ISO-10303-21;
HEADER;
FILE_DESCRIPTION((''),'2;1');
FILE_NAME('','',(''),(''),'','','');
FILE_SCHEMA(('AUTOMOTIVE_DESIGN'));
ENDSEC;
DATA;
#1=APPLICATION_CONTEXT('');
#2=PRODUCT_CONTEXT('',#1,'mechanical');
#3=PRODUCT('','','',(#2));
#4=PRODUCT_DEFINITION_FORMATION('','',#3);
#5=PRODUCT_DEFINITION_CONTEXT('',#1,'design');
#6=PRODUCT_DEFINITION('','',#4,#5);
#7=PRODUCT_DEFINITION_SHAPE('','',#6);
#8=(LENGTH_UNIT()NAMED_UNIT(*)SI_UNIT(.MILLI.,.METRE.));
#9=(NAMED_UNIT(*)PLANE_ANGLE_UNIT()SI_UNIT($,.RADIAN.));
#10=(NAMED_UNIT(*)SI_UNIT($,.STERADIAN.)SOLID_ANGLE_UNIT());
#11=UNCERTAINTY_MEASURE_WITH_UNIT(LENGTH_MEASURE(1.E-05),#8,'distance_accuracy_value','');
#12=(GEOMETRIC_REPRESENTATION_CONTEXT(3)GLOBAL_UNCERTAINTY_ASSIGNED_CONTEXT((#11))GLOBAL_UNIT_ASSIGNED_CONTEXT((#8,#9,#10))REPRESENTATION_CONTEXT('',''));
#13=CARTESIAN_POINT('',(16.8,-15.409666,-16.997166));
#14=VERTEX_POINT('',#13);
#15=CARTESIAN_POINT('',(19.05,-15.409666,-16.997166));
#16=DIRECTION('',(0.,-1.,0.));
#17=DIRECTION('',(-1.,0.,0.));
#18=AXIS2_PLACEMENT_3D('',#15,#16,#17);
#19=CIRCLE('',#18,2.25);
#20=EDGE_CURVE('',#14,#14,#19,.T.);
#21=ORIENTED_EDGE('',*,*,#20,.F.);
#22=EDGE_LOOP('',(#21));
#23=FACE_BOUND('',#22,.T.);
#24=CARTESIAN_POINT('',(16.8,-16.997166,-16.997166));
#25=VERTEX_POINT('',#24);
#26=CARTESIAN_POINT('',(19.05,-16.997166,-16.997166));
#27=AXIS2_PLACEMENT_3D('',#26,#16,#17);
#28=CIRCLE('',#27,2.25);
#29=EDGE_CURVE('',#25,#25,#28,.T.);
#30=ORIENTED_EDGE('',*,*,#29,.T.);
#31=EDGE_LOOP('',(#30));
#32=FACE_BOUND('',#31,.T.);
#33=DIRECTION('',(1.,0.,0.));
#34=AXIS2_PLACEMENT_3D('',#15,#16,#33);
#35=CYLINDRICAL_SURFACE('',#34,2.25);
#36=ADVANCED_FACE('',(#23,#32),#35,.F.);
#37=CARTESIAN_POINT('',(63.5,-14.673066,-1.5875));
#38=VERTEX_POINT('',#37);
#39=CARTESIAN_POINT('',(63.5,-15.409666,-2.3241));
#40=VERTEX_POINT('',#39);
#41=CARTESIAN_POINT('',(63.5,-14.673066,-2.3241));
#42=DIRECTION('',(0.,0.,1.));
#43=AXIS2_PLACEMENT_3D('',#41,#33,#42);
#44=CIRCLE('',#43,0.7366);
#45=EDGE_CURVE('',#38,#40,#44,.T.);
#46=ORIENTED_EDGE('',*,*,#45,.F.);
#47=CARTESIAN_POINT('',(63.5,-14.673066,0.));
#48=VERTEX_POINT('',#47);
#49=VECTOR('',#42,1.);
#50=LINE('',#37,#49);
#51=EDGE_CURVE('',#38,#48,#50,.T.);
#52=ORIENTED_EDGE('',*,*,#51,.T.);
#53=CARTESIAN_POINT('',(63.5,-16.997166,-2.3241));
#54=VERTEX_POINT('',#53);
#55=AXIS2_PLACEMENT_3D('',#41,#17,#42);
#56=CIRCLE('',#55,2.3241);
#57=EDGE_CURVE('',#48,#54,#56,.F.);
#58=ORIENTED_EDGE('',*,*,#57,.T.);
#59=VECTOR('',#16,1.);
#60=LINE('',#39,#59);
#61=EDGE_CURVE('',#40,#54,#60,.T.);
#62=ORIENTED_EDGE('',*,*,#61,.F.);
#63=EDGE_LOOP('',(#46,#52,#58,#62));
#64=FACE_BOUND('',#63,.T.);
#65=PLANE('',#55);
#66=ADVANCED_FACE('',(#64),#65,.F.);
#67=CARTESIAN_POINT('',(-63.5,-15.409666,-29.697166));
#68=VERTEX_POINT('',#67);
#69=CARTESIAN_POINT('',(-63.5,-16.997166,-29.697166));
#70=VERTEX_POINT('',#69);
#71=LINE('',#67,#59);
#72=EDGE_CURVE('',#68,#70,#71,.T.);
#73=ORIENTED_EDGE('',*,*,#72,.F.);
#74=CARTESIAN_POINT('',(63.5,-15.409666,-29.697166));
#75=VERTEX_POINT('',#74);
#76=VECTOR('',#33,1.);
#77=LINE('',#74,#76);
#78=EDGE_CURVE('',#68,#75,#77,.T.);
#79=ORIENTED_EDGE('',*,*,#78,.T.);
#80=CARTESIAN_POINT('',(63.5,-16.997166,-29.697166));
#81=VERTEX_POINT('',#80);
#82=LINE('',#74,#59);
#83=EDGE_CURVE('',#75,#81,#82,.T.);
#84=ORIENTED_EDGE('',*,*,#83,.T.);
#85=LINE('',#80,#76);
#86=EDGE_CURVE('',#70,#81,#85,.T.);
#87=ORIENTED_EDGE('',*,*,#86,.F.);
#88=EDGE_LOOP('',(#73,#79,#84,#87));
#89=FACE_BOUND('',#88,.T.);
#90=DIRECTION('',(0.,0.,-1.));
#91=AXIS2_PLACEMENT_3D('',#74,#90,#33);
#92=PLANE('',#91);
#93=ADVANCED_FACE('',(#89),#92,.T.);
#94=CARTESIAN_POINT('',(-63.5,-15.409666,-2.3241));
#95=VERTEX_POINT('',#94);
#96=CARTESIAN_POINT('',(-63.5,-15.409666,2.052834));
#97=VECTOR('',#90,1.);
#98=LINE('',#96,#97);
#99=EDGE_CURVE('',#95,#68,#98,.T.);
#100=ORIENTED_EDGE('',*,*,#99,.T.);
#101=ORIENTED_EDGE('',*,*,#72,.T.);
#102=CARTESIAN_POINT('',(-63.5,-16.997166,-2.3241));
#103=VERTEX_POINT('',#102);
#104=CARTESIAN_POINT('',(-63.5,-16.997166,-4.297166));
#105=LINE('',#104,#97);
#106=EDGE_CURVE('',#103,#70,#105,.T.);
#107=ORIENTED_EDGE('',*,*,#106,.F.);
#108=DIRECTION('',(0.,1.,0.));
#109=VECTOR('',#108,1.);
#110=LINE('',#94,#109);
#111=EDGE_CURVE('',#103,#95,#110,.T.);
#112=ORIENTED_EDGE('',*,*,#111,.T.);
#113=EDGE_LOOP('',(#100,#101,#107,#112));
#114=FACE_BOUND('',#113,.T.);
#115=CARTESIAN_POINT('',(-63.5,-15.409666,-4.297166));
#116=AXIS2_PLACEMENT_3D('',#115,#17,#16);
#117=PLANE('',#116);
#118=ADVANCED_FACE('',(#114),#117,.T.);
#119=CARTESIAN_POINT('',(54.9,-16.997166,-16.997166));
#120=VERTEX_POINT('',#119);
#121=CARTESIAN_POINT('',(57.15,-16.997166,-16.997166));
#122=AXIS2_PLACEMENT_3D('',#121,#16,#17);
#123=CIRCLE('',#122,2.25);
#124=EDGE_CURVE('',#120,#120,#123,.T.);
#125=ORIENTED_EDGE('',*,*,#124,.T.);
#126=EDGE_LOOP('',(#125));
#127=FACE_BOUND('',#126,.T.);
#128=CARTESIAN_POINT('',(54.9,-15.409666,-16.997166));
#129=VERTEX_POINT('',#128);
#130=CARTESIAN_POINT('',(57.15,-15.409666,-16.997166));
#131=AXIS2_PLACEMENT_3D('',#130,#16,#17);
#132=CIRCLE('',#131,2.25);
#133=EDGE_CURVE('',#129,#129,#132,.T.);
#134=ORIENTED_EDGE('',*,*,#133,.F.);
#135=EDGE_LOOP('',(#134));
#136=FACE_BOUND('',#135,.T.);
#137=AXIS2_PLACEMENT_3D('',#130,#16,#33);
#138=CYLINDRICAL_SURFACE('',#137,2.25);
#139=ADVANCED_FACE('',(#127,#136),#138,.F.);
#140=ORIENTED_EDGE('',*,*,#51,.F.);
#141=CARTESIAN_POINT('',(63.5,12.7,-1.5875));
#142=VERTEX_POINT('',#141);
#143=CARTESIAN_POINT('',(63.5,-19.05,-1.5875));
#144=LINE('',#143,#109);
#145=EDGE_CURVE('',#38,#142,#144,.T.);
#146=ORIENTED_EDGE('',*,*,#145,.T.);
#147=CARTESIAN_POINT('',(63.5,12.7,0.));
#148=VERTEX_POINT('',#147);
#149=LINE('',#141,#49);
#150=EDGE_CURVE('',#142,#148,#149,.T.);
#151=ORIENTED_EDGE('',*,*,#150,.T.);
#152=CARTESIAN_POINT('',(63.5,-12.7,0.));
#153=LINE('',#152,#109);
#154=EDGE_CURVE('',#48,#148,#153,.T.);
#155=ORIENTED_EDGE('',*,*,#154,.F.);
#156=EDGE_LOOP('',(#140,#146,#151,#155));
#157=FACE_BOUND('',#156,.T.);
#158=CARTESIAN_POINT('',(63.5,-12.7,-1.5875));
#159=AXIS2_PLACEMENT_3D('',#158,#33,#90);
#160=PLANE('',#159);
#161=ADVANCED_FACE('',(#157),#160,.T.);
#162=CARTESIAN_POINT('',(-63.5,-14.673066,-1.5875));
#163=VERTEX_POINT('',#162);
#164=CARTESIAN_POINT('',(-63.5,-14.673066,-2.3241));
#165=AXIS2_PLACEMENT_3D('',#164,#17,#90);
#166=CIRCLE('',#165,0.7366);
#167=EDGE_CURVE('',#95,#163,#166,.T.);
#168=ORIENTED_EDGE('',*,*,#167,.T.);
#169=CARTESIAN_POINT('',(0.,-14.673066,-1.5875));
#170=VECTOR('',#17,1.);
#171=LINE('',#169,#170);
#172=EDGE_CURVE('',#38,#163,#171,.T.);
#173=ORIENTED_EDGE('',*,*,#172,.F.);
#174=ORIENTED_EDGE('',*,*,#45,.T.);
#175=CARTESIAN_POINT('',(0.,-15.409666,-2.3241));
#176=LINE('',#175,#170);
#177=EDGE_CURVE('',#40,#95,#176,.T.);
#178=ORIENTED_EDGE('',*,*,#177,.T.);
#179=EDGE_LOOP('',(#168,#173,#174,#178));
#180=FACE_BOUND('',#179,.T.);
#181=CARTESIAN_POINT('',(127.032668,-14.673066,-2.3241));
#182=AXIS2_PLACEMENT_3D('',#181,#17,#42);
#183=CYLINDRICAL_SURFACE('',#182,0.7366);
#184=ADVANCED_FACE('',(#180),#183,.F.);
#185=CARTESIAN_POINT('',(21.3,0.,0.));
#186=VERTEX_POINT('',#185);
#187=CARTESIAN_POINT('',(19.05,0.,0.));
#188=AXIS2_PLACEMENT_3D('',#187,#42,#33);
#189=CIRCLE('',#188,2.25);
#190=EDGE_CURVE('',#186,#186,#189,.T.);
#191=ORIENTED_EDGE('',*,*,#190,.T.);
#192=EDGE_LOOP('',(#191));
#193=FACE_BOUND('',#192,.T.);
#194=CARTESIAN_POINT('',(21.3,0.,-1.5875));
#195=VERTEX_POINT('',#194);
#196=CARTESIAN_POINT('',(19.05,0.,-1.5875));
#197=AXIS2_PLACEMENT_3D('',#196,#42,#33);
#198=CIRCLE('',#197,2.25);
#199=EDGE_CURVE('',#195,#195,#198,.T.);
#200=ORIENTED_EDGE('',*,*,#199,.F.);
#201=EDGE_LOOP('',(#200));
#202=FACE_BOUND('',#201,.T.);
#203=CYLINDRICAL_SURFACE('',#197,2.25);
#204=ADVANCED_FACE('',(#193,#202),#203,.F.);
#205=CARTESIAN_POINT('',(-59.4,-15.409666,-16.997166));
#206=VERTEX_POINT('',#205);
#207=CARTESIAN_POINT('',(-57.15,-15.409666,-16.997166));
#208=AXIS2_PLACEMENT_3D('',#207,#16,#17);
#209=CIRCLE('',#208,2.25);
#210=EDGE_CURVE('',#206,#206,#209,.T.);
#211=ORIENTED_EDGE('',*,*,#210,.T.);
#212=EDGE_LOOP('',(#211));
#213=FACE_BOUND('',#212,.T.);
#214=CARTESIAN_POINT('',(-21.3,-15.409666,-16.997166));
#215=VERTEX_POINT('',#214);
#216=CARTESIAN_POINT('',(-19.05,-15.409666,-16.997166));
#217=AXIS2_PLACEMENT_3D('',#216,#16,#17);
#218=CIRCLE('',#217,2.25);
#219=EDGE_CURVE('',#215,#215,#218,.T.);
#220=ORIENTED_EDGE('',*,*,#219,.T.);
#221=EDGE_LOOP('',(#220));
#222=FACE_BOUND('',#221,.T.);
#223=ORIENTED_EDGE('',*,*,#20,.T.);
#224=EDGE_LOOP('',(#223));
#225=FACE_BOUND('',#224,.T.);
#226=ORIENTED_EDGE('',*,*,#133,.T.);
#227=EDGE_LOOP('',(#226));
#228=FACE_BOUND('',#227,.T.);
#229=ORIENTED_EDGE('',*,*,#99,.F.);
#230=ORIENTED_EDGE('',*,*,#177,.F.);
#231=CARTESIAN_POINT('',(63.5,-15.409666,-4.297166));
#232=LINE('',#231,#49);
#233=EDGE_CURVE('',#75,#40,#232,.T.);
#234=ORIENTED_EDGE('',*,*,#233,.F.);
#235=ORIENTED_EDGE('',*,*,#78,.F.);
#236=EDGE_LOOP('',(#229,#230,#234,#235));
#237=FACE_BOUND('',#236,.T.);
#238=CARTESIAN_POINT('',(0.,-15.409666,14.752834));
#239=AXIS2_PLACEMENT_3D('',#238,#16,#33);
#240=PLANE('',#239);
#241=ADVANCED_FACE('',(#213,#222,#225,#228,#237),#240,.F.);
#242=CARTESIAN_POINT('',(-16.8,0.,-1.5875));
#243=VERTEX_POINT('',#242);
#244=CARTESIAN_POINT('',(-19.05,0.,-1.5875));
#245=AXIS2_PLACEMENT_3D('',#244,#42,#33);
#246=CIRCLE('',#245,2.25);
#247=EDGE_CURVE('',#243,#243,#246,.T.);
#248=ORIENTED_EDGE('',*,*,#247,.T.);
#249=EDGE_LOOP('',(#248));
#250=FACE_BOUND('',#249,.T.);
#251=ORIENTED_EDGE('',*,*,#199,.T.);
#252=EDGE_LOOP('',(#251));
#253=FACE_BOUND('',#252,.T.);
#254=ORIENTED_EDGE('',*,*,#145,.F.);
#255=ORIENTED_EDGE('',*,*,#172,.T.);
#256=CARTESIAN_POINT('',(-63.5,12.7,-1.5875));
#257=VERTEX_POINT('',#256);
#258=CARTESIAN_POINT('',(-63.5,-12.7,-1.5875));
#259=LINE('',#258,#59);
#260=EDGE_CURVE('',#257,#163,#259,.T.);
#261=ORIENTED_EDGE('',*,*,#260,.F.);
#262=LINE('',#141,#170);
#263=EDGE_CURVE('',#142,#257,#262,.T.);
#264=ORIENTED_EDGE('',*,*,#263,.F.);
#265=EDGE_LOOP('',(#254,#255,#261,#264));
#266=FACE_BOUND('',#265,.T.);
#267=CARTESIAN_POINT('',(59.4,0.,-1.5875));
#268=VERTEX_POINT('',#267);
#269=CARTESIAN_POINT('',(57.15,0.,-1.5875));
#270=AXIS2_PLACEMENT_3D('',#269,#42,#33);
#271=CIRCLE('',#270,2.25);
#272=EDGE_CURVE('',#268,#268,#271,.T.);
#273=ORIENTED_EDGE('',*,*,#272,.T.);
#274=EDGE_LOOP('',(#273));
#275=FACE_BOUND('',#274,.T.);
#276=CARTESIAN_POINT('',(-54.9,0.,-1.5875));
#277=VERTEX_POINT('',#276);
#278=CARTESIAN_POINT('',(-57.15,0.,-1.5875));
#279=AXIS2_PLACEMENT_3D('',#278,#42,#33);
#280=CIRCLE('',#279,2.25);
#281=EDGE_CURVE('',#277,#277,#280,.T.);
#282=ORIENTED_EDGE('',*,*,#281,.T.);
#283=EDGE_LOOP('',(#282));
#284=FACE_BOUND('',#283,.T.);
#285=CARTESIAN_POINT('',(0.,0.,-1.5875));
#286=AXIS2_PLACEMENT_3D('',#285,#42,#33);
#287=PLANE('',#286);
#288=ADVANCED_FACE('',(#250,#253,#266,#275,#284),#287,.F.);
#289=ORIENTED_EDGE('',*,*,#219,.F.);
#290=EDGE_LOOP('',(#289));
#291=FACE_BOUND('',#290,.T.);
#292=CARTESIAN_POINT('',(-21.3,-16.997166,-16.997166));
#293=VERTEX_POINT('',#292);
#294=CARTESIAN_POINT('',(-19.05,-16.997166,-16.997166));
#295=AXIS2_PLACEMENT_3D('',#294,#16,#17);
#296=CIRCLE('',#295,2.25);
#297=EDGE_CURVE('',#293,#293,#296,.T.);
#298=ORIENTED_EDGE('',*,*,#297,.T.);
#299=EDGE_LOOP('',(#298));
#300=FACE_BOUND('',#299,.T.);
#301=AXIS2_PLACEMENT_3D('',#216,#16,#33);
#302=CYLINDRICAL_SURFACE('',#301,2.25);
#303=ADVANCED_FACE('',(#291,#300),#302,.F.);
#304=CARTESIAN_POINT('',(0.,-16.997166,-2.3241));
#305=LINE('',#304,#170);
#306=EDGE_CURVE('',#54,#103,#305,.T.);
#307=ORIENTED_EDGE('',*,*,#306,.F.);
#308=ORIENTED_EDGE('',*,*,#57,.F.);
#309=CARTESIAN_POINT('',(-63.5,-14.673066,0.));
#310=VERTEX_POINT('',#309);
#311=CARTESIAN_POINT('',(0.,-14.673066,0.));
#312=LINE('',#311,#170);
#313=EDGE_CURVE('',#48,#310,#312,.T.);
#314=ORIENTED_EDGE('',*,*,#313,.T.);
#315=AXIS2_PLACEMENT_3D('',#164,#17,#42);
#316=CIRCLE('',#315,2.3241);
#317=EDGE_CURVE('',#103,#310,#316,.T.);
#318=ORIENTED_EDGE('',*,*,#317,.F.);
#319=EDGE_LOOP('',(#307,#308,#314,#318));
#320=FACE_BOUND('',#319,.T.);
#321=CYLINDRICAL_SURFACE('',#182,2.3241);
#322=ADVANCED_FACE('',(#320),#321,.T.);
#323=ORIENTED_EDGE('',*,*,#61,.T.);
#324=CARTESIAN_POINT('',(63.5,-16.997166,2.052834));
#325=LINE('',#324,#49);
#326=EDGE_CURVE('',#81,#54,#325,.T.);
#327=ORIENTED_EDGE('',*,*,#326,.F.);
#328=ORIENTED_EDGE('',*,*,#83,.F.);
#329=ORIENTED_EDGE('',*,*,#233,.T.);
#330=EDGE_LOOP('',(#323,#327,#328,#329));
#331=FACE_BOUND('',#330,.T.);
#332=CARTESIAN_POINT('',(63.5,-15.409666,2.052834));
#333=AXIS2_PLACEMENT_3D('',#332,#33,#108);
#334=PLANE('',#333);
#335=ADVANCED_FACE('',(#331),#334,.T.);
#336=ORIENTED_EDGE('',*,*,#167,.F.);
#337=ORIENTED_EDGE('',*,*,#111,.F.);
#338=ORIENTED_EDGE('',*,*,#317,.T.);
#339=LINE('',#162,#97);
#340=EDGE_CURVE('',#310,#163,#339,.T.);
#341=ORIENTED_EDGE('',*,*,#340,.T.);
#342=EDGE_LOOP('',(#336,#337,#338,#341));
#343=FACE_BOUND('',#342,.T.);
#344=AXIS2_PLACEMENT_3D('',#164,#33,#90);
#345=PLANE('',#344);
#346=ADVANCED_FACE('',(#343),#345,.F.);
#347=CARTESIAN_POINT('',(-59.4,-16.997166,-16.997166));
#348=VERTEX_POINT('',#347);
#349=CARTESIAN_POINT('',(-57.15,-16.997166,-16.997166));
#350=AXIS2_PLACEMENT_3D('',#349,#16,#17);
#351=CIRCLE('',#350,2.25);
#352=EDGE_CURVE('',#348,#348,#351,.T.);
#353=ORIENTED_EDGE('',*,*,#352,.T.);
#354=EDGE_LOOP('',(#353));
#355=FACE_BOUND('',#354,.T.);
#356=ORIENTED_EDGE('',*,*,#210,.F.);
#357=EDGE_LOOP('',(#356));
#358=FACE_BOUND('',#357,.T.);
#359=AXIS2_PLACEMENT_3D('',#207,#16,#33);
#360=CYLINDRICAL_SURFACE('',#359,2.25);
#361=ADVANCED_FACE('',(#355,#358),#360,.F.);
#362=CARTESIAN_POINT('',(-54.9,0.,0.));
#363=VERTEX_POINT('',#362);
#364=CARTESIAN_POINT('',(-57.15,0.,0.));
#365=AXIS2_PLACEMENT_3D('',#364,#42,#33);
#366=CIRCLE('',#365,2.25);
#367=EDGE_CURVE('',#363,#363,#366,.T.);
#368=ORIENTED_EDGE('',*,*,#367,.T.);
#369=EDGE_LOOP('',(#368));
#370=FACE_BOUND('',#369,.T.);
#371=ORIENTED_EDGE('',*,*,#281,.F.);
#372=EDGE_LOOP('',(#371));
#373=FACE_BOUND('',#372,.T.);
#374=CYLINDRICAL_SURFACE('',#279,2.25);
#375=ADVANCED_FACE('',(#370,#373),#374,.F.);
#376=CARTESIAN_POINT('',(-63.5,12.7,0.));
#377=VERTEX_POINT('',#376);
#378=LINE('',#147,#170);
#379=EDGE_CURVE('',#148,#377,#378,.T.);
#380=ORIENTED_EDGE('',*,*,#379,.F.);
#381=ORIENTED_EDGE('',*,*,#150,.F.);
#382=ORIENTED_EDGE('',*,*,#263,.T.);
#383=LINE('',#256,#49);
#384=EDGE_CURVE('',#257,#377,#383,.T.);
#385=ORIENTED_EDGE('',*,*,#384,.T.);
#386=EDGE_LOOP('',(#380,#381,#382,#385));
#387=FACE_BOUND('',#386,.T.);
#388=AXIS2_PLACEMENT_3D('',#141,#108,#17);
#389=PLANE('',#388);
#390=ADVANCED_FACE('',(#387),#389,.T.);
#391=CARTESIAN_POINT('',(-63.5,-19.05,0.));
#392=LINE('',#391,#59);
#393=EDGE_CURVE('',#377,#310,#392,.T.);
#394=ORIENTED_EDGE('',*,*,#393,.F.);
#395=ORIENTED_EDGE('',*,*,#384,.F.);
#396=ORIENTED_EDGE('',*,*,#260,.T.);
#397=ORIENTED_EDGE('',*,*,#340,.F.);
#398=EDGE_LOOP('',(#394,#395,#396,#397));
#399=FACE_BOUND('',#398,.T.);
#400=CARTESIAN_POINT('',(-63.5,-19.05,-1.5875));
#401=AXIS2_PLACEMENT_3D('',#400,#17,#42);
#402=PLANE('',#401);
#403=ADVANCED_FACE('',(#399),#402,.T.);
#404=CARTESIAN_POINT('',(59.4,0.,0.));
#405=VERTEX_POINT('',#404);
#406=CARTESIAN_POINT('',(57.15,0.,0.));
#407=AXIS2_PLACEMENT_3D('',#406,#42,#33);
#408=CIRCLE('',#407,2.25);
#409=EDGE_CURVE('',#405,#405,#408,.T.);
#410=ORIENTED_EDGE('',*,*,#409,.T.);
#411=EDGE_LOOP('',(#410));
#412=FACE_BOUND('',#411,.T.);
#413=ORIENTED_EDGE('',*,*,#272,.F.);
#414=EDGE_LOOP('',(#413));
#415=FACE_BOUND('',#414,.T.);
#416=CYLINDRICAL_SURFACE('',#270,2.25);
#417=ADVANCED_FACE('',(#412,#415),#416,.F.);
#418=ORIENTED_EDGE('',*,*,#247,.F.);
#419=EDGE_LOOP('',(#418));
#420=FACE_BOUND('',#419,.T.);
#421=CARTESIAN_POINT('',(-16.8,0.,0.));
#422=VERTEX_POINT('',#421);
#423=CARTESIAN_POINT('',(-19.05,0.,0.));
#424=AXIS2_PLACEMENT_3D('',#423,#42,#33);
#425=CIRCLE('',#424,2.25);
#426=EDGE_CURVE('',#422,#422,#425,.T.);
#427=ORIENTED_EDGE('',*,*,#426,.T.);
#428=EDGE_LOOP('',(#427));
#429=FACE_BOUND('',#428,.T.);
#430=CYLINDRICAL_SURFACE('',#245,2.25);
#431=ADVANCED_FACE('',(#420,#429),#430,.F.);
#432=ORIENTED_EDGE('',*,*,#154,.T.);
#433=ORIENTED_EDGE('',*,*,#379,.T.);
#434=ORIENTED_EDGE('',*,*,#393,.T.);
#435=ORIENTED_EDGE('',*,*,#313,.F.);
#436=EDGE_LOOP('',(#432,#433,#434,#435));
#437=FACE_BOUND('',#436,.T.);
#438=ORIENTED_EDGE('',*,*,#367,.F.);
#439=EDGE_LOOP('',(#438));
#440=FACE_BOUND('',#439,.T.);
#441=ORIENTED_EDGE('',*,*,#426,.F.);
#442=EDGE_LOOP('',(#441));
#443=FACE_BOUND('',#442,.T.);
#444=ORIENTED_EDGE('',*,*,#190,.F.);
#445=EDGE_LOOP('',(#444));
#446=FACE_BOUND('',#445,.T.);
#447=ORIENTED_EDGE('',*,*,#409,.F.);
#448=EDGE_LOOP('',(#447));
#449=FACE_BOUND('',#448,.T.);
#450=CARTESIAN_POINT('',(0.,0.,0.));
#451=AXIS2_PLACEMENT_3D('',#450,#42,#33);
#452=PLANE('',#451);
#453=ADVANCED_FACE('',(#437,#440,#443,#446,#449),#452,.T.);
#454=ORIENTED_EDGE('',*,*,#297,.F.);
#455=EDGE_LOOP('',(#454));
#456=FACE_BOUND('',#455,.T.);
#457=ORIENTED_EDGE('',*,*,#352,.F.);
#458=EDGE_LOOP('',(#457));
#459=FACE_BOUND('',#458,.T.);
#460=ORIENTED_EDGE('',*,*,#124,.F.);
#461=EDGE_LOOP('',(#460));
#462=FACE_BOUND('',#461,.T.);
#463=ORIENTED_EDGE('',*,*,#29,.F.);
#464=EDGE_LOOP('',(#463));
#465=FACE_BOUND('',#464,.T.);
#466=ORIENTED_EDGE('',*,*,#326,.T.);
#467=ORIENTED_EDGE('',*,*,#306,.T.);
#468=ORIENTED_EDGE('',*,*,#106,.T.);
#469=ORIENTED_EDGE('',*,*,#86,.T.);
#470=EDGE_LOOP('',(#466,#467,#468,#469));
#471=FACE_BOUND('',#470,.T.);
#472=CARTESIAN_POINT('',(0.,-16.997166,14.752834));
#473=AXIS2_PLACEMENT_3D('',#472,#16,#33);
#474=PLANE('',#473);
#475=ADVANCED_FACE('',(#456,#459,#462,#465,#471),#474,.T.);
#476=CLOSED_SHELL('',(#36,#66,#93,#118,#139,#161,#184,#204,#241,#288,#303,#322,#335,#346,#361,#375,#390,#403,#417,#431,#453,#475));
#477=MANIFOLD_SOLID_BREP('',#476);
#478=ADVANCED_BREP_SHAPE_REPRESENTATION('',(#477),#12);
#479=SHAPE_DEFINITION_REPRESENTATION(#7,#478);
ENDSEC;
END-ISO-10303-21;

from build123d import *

# Parameters (mm, degrees)
SKETCH1_R                  = 2.25
BASE_FLANGE1_DEPTH         = 1.5875
SKETCHED_START             = -44.45
SKETCHED_BEND1_OUTLINE_W   = 127
SKETCHED_BEND1_OUTLINE_H   = 1.5875
SKETCHED_BEND1_DEPTH       = 27.452834079
SKETCHED_START_2           = -16.777817363
SKETCHED_BEND1_2_OUTLINE_W = 127
SKETCHED_BEND1_2_OUTLINE_H = 28.109665921
SKETCHED_BEND1_2_OUTLINE_R = 2.25
SKETCHED_BEND1_2_DEPTH     = 1.368151442
SKETCHED_START_3           = -16.997165921
SKETCHED_BEND1_3_OUTLINE_W = 127
SKETCHED_BEND1_3_OUTLINE_H = 28.109665921
SKETCHED_BEND1_3_OUTLINE_R = 2.25
SKETCHED_BEND1_3_DEPTH     = 2.3241
SKETCHED_START_4           = -64
SKETCHED_BEND1_4_DEPTH     = 128


with BuildPart() as part:
    # Base-Flange1: sheet metal written as solids
    # Sketch1 → Base-Flange1 (new body)
    with BuildSketch(Plane.XY):
        Polygon((63.5, -12.7), (63.5, 12.7), (-63.5, 12.7), (-63.5, -12.7), (-63.5, -19.05), (-63.5, -44.45), (63.5, -44.45), (63.5, -19.05), align=None)
        with Locations((-57.15, 0)):
            Circle(SKETCH1_R, mode=Mode.SUBTRACT)
        with Locations((-19.05, 0)):
            Circle(SKETCH1_R, mode=Mode.SUBTRACT)
        with Locations((19.05, 0)):
            Circle(SKETCH1_R, mode=Mode.SUBTRACT)
        with Locations((57.15, 0)):
            Circle(SKETCH1_R, mode=Mode.SUBTRACT)
        with Locations(Location((57.15, -31.75, 0), (0, 0, 180))):
            Circle(SKETCH1_R, mode=Mode.SUBTRACT)
        with Locations(Location((19.05, -31.75, 0), (0, 0, 180))):
            Circle(SKETCH1_R, mode=Mode.SUBTRACT)
        with Locations(Location((-19.05, -31.75, 0), (0, 0, 180))):
            Circle(SKETCH1_R, mode=Mode.SUBTRACT)
        with Locations(Location((-57.15, -31.75, 0), (0, 0, 180))):
            Circle(SKETCH1_R, mode=Mode.SUBTRACT)
    extrude(amount=-BASE_FLANGE1_DEPTH)

    # Sketched Bend1: read off the stored shape, not the designer's step
    # Sketched Bend1 outline → Sketched Bend1 (cut)
    with BuildSketch(Plane(origin=(0, 0, 0), x_dir=(1, 0, 0), z_dir=(0, 1, 0)).offset(SKETCHED_START)):
        with Locations((0, 0.79375)):
            Rectangle(SKETCHED_BEND1_OUTLINE_W, SKETCHED_BEND1_OUTLINE_H)
    extrude(amount=SKETCHED_BEND1_DEPTH, mode=Mode.SUBTRACT)

    # Sketched Bend1 2 outline → Sketched Bend1 2 (add)
    with BuildSketch(Plane(origin=(0, 0, 0), x_dir=(1, 0, 0), z_dir=(0, 1, 0)).offset(SKETCHED_START_2)):
        with Locations((0, 15.642332961)):
            Rectangle(SKETCHED_BEND1_2_OUTLINE_W, SKETCHED_BEND1_2_OUTLINE_H)
        with Locations((-57.15, 16.997165921)):
            Circle(SKETCHED_BEND1_2_OUTLINE_R, mode=Mode.SUBTRACT)
        with Locations((-19.05, 16.997165921)):
            Circle(SKETCHED_BEND1_2_OUTLINE_R, mode=Mode.SUBTRACT)
        with Locations((19.05, 16.997165921)):
            Circle(SKETCHED_BEND1_2_OUTLINE_R, mode=Mode.SUBTRACT)
        with Locations((57.15, 16.997165921)):
            Circle(SKETCHED_BEND1_2_OUTLINE_R, mode=Mode.SUBTRACT)
    extrude(amount=SKETCHED_BEND1_2_DEPTH)

    # Sketched Bend1 3 outline → Sketched Bend1 3 (add)
    with BuildSketch(Plane(origin=(0, 0, 0), x_dir=(1, 0, 0), z_dir=(0, 1, 0)).offset(SKETCHED_START_3)):
        with Locations((0, 15.642332961)):
            Rectangle(SKETCHED_BEND1_3_OUTLINE_W, SKETCHED_BEND1_3_OUTLINE_H)
        with Locations((-57.15, 16.997165921)):
            Circle(SKETCHED_BEND1_3_OUTLINE_R, mode=Mode.SUBTRACT)
        with Locations((-19.05, 16.997165921)):
            Circle(SKETCHED_BEND1_3_OUTLINE_R, mode=Mode.SUBTRACT)
        with Locations((19.05, 16.997165921)):
            Circle(SKETCHED_BEND1_3_OUTLINE_R, mode=Mode.SUBTRACT)
        with Locations((57.15, 16.997165921)):
            Circle(SKETCHED_BEND1_3_OUTLINE_R, mode=Mode.SUBTRACT)
    extrude(amount=SKETCHED_BEND1_3_DEPTH)

    # Sketched Bend1 4 outline → Sketched Bend1 4 (cut)
    with BuildSketch(Plane.YZ.offset(SKETCHED_START_4)):
        with BuildLine():
            ThreePointArc((-14.673065921, -1.5875), (-15.193920776, -1.803245145), (-15.409665921, -2.3241))
            Line((-15.409665921, -2.3241), (-15.409665921, -29.697165921))
            Line((-15.409665921, -29.697165921), (-14.673065921, -29.697165921))
            Line((-14.673065921, -29.697165921), (-14.673065921, -1.5875))
        make_face()
        with BuildLine():
            Line((-16.997165921, 0), (-16.997165921, -2.3241))
            ThreePointArc((-16.997165921, -2.3241), (-16.316452791, -0.68071313), (-14.673065921, 0))
            Line((-14.673065921, 0), (-16.997165921, 0))
        make_face()
    extrude(amount=SKETCHED_BEND1_4_DEPTH, mode=Mode.SUBTRACT)


solid = part.part
